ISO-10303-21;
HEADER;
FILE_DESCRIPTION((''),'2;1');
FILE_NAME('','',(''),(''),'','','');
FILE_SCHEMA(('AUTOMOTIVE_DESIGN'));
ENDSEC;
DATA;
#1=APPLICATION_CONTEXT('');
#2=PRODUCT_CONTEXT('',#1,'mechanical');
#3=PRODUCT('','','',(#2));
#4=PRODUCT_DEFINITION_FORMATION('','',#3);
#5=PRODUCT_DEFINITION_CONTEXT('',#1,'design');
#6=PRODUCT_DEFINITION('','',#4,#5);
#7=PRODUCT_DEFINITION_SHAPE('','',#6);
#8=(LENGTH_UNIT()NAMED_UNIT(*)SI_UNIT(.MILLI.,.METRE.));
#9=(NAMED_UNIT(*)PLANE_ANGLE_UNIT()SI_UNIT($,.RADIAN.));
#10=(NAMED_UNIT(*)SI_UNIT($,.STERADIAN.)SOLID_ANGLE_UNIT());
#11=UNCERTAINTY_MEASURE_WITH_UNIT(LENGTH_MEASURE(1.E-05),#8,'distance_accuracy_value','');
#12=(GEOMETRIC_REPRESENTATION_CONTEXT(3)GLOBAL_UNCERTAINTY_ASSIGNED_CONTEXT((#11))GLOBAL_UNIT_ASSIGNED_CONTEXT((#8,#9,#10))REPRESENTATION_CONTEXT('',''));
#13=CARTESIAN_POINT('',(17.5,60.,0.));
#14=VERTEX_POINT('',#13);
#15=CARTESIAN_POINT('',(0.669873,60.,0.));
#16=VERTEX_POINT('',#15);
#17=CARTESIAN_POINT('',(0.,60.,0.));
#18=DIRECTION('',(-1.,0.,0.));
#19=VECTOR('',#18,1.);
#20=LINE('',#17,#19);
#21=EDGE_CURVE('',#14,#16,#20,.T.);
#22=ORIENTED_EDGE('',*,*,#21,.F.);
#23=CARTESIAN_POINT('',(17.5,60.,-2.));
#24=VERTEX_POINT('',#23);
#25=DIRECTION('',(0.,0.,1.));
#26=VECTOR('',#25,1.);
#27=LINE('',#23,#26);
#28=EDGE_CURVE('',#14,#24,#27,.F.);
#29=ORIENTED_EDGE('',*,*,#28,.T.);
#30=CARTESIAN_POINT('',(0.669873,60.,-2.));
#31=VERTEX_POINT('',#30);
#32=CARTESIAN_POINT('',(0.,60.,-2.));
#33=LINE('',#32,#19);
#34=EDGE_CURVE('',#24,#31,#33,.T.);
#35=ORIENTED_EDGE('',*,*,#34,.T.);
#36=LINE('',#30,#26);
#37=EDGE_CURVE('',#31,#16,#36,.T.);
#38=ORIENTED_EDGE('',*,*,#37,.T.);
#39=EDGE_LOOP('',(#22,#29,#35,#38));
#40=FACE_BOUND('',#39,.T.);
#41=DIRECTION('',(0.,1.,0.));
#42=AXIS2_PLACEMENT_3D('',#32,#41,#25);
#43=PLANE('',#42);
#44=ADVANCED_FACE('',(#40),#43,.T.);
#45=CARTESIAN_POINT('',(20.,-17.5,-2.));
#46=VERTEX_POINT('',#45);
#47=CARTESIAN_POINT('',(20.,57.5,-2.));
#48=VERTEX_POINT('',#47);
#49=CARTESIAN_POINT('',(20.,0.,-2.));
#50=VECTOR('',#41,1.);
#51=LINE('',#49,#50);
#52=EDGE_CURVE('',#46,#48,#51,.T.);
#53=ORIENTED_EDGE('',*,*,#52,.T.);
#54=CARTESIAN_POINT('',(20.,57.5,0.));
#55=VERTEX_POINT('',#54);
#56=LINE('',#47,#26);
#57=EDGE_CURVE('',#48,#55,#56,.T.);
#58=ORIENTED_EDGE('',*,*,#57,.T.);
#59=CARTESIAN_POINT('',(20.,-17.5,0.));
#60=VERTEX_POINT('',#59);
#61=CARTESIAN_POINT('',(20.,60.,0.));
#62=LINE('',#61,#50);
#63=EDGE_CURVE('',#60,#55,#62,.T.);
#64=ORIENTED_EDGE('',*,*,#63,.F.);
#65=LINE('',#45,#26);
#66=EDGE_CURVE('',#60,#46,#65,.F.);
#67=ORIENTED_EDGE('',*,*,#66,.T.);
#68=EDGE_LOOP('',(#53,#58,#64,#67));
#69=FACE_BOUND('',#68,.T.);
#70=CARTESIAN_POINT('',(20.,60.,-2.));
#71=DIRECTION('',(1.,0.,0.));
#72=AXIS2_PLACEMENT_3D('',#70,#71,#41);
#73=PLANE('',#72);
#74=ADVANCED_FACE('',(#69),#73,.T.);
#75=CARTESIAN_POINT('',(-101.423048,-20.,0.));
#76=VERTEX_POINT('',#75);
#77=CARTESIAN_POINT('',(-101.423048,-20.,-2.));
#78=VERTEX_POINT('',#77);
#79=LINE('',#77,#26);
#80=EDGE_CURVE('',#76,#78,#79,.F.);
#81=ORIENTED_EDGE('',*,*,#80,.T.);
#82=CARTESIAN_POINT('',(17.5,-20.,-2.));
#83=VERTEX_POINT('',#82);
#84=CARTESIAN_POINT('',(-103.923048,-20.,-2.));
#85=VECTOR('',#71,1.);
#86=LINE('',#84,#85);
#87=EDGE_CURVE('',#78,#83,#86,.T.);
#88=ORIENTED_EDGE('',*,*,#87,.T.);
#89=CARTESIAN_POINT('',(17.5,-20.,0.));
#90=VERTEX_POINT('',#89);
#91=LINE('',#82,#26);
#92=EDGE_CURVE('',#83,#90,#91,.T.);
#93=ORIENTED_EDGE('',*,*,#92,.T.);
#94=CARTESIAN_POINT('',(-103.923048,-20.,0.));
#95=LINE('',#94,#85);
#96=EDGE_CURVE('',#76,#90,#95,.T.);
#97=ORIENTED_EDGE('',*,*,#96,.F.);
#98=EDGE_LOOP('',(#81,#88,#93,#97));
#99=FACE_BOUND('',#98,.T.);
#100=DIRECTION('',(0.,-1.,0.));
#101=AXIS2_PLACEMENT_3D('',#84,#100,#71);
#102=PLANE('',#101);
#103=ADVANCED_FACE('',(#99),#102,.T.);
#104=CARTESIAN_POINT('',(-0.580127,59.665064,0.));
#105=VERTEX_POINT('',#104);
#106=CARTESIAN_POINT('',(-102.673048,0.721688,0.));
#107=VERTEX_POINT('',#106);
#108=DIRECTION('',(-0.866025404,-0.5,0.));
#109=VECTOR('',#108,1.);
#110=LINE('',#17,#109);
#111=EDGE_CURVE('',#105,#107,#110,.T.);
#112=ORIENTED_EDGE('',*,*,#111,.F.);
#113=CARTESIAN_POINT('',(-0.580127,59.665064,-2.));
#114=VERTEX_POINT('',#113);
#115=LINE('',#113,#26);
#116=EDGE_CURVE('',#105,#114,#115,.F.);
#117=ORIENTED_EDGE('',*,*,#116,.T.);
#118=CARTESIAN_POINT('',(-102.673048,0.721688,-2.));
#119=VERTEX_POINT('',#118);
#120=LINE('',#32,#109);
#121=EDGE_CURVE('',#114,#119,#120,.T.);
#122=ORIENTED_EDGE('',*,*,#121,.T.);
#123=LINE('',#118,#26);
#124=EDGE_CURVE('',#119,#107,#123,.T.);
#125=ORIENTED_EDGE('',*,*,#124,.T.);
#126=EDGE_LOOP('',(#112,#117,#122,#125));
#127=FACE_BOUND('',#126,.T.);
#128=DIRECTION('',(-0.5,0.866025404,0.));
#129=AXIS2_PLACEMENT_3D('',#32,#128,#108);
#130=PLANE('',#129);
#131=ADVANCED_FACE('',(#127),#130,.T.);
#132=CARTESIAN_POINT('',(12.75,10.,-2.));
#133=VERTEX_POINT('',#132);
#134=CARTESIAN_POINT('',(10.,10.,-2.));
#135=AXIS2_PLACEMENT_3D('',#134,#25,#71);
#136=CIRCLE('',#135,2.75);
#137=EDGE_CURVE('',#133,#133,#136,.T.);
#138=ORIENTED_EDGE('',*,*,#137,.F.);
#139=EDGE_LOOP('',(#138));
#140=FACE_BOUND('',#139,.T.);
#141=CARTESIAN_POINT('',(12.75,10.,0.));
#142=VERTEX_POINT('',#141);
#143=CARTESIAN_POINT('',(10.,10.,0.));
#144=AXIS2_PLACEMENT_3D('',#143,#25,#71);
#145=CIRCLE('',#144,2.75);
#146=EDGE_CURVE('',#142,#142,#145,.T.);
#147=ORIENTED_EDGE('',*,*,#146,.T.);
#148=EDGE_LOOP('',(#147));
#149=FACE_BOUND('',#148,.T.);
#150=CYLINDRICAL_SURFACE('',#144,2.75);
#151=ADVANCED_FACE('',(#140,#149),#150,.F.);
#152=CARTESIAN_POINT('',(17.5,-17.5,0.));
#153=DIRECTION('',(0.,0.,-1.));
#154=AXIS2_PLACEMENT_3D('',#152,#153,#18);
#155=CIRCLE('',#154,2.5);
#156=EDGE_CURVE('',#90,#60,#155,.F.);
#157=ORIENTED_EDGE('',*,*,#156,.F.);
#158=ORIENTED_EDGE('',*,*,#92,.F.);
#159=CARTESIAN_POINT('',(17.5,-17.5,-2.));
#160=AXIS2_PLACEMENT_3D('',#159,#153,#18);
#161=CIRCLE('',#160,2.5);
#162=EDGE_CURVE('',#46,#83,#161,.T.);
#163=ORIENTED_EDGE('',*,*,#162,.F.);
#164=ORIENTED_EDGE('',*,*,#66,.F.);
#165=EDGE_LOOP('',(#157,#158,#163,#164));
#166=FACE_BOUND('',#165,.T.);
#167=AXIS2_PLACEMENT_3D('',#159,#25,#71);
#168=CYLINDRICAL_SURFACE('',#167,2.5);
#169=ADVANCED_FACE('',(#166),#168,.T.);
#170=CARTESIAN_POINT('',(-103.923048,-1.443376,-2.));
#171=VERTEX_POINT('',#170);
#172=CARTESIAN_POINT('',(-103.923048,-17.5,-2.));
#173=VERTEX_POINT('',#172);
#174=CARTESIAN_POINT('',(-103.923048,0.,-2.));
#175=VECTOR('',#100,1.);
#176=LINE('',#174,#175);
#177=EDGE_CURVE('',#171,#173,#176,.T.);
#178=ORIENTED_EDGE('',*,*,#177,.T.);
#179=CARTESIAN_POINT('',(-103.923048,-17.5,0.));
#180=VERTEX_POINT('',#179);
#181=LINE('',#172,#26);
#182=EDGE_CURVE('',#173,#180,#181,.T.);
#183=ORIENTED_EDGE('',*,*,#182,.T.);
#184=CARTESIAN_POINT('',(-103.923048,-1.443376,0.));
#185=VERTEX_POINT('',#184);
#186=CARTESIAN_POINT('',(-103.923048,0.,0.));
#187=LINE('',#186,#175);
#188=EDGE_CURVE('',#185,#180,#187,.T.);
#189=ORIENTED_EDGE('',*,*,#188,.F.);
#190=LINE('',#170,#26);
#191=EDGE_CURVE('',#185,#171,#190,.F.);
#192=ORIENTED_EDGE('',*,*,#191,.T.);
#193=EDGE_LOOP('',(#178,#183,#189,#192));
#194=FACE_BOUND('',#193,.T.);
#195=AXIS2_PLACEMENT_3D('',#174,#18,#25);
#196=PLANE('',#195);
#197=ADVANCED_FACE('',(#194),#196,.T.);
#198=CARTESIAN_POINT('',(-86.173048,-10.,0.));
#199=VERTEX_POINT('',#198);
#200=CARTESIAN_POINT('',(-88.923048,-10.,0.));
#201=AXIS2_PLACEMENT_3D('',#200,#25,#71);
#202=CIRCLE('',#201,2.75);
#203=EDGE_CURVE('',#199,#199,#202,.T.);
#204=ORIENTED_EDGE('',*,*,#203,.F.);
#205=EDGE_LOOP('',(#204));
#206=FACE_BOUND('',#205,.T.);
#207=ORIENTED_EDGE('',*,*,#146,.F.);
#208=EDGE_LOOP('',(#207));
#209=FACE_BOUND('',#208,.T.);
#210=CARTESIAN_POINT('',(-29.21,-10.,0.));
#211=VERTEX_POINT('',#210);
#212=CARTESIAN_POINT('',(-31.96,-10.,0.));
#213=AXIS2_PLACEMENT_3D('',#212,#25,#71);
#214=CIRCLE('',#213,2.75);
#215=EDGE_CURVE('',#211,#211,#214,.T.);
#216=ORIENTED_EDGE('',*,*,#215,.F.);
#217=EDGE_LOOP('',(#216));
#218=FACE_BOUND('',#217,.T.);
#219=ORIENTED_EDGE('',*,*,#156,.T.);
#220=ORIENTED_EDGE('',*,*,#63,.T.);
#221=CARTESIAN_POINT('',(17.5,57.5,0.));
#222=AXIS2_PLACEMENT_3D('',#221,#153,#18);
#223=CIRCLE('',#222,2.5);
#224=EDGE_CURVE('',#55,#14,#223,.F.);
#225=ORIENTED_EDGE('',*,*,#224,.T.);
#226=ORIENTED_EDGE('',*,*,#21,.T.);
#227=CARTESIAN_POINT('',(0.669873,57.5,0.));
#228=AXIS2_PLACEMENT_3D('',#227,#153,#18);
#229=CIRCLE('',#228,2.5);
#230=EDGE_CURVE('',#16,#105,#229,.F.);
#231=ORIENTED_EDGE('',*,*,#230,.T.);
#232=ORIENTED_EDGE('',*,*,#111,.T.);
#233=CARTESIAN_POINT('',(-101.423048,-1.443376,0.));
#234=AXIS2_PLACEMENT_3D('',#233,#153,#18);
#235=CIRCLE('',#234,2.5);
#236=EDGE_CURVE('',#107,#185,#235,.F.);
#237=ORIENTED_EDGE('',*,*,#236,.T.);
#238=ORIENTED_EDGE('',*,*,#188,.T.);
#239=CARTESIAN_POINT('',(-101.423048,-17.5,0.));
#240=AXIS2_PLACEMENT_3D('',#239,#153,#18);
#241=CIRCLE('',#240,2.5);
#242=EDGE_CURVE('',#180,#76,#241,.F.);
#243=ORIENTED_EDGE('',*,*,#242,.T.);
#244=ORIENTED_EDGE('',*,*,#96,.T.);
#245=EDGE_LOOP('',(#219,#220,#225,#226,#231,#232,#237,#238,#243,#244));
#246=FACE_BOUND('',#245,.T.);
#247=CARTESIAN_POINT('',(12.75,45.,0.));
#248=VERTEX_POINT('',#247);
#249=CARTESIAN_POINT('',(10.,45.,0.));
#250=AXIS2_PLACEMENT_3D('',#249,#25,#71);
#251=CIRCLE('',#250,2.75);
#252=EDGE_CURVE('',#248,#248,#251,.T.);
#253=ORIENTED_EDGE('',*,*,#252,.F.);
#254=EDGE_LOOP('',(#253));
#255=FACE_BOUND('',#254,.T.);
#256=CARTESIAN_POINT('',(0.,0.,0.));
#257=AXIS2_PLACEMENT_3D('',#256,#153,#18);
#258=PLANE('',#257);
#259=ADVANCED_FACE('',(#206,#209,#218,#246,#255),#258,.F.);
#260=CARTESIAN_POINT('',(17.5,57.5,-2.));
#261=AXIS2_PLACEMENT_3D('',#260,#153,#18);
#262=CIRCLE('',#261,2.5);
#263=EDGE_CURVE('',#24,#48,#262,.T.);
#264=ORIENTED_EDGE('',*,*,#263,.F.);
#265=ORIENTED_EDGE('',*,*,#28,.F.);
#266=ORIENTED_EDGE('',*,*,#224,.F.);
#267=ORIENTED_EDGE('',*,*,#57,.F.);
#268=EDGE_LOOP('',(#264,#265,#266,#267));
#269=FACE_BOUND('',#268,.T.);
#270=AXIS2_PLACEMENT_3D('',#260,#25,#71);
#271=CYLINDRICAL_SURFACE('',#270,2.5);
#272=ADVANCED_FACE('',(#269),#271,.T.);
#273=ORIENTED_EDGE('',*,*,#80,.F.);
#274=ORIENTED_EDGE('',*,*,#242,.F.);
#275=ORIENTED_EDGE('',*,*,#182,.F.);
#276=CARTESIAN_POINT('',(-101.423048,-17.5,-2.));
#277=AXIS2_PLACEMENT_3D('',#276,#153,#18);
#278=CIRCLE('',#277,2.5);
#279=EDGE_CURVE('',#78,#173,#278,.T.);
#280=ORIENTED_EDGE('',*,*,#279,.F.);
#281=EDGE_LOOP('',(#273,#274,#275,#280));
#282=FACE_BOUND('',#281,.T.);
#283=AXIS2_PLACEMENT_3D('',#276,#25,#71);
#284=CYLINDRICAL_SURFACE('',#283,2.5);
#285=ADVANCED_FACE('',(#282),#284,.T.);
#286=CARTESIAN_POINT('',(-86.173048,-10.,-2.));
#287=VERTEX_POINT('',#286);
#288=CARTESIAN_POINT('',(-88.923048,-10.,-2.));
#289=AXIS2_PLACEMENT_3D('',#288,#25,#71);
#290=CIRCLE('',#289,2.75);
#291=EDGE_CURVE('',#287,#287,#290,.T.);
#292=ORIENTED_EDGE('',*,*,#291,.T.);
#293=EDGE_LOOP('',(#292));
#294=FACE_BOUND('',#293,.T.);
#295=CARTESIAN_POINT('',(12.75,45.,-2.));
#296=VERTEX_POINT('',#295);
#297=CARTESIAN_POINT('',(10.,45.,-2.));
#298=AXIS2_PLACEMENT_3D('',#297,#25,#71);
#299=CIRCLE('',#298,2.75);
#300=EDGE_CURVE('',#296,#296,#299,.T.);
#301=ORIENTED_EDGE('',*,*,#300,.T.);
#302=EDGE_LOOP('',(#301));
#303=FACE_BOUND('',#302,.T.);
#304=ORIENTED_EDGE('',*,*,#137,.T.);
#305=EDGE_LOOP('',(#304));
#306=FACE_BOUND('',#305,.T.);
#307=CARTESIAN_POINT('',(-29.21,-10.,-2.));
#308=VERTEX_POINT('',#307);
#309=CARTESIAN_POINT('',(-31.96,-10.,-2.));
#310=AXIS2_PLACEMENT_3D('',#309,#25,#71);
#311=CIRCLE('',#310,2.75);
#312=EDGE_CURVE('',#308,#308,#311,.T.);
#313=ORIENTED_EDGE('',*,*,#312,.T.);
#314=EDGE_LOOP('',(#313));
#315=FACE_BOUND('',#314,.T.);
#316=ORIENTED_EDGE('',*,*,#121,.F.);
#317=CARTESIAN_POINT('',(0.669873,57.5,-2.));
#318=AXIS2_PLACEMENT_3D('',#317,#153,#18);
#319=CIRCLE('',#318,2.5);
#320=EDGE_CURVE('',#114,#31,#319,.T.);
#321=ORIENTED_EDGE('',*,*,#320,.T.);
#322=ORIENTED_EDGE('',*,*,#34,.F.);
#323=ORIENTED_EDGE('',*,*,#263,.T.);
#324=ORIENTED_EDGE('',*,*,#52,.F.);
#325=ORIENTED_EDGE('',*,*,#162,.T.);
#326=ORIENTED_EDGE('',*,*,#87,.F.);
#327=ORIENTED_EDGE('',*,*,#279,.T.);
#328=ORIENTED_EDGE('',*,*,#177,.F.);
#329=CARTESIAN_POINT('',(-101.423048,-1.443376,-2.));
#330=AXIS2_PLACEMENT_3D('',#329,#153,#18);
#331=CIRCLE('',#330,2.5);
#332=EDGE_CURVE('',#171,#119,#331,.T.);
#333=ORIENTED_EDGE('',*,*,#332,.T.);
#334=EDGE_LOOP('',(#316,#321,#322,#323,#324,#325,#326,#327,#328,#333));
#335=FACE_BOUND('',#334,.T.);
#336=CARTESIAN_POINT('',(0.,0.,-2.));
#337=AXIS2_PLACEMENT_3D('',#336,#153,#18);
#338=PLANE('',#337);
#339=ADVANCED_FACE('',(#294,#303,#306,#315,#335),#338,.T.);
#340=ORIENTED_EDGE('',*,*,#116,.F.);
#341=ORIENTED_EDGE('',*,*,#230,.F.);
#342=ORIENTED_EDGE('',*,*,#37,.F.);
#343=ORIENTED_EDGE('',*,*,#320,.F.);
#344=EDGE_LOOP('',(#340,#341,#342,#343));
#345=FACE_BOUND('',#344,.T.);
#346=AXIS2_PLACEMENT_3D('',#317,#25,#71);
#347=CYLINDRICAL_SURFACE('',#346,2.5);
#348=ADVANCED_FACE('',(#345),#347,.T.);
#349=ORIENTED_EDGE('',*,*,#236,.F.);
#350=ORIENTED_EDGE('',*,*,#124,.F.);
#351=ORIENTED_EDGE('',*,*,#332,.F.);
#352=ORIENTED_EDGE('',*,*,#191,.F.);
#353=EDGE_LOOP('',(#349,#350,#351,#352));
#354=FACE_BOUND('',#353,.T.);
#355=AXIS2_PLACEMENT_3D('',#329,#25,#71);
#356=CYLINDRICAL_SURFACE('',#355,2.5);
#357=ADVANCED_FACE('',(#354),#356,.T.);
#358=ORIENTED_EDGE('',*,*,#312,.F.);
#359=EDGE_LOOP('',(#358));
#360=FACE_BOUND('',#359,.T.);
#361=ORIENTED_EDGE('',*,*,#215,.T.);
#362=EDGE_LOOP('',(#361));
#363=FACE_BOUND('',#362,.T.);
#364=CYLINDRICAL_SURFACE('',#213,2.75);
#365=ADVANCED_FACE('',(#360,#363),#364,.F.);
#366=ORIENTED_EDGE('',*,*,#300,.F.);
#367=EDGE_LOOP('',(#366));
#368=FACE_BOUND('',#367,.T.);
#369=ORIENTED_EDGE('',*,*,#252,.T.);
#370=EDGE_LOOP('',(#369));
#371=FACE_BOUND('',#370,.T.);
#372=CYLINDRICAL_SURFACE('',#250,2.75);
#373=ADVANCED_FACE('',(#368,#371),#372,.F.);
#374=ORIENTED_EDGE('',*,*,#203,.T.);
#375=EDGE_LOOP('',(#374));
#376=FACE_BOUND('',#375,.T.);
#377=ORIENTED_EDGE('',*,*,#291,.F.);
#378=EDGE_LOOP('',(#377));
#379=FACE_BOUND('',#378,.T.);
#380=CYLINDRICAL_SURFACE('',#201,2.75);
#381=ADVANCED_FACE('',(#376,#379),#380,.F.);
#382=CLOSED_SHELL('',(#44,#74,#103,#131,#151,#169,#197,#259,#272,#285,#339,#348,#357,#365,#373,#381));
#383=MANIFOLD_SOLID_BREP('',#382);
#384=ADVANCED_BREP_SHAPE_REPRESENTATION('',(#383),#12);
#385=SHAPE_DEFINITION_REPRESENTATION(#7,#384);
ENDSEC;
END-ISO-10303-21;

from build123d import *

# Parameters (mm, degrees)
BASE_FLANGE1_DEPTH   = 2
M5_CLEARANCE_HOLE2_D = 5.5
BREAK_CORNER1_START  = -2
BREAK_CORNER1_DEPTH  = 2


# Read off the part's stored shape, not the designer's step: Break-Corner1
# Sheet-metal steps are written as plain solids
with BuildPart() as part:
    # Sketch2 → Base-Flange1 (new body)
    with BuildSketch(Plane.XY):
        Polygon((0, 60), (-103.923048454, 0), (-103.923048454, -20), (20, -20), (20, 0), (20, 60), align=None)
    extrude(amount=-BASE_FLANGE1_DEPTH)

    # M5 Clearance Hole2 (through all)
    with Locations(Plane.XY):
        with Locations((-88.923048454, -10), (-31.96, -10), (10, 10), (10, 45)):
            Hole(M5_CLEARANCE_HOLE2_D / 2)

    # Break-Corner1 outline → Break-Corner1 (cut)
    with BuildSketch(Plane.XY.offset(BREAK_CORNER1_START)):
        with BuildLine():
            ThreePointArc((17.5, 60), (19.267766953, 59.267766953), (20, 57.5))
            Line((20, 57.5), (20, 60))
            Line((20, 60), (17.5, 60))
        make_face()
        with BuildLine():
            Line((20, -20), (20, -17.5))
            ThreePointArc((20, -17.5), (19.267766953, -19.267766953), (17.5, -20))
            Line((17.5, -20), (20, -20))
        make_face()
        with BuildLine():
            ThreePointArc((-0.580127019, 59.665063509), (0.022825368, 59.914814566), (0.669872981, 60))
            Line((0.669872981, 60), (0, 60))
            Line((0, 60), (-0.580127019, 59.665063509))
        make_face()
        with BuildLine():
            Line((-103.923048454, -20), (-101.423048454, -20))
            ThreePointArc((-101.423048454, -20), (-103.190815407, -19.267766953), (-103.923048454, -17.5))
            Line((-103.923048454, -17.5), (-103.923048454, -20))
        make_face()
        with BuildLine():
            ThreePointArc((-103.923048454, -1.443375673), (-103.588111964, -0.193375673), (-102.673048454, 0.721687836))
            Line((-102.673048454, 0.721687836), (-103.923048454, 0))
            Line((-103.923048454, 0), (-103.923048454, -1.443375673))
        make_face()
    extrude(amount=BREAK_CORNER1_DEPTH, mode=Mode.SUBTRACT)


solid = part.part
